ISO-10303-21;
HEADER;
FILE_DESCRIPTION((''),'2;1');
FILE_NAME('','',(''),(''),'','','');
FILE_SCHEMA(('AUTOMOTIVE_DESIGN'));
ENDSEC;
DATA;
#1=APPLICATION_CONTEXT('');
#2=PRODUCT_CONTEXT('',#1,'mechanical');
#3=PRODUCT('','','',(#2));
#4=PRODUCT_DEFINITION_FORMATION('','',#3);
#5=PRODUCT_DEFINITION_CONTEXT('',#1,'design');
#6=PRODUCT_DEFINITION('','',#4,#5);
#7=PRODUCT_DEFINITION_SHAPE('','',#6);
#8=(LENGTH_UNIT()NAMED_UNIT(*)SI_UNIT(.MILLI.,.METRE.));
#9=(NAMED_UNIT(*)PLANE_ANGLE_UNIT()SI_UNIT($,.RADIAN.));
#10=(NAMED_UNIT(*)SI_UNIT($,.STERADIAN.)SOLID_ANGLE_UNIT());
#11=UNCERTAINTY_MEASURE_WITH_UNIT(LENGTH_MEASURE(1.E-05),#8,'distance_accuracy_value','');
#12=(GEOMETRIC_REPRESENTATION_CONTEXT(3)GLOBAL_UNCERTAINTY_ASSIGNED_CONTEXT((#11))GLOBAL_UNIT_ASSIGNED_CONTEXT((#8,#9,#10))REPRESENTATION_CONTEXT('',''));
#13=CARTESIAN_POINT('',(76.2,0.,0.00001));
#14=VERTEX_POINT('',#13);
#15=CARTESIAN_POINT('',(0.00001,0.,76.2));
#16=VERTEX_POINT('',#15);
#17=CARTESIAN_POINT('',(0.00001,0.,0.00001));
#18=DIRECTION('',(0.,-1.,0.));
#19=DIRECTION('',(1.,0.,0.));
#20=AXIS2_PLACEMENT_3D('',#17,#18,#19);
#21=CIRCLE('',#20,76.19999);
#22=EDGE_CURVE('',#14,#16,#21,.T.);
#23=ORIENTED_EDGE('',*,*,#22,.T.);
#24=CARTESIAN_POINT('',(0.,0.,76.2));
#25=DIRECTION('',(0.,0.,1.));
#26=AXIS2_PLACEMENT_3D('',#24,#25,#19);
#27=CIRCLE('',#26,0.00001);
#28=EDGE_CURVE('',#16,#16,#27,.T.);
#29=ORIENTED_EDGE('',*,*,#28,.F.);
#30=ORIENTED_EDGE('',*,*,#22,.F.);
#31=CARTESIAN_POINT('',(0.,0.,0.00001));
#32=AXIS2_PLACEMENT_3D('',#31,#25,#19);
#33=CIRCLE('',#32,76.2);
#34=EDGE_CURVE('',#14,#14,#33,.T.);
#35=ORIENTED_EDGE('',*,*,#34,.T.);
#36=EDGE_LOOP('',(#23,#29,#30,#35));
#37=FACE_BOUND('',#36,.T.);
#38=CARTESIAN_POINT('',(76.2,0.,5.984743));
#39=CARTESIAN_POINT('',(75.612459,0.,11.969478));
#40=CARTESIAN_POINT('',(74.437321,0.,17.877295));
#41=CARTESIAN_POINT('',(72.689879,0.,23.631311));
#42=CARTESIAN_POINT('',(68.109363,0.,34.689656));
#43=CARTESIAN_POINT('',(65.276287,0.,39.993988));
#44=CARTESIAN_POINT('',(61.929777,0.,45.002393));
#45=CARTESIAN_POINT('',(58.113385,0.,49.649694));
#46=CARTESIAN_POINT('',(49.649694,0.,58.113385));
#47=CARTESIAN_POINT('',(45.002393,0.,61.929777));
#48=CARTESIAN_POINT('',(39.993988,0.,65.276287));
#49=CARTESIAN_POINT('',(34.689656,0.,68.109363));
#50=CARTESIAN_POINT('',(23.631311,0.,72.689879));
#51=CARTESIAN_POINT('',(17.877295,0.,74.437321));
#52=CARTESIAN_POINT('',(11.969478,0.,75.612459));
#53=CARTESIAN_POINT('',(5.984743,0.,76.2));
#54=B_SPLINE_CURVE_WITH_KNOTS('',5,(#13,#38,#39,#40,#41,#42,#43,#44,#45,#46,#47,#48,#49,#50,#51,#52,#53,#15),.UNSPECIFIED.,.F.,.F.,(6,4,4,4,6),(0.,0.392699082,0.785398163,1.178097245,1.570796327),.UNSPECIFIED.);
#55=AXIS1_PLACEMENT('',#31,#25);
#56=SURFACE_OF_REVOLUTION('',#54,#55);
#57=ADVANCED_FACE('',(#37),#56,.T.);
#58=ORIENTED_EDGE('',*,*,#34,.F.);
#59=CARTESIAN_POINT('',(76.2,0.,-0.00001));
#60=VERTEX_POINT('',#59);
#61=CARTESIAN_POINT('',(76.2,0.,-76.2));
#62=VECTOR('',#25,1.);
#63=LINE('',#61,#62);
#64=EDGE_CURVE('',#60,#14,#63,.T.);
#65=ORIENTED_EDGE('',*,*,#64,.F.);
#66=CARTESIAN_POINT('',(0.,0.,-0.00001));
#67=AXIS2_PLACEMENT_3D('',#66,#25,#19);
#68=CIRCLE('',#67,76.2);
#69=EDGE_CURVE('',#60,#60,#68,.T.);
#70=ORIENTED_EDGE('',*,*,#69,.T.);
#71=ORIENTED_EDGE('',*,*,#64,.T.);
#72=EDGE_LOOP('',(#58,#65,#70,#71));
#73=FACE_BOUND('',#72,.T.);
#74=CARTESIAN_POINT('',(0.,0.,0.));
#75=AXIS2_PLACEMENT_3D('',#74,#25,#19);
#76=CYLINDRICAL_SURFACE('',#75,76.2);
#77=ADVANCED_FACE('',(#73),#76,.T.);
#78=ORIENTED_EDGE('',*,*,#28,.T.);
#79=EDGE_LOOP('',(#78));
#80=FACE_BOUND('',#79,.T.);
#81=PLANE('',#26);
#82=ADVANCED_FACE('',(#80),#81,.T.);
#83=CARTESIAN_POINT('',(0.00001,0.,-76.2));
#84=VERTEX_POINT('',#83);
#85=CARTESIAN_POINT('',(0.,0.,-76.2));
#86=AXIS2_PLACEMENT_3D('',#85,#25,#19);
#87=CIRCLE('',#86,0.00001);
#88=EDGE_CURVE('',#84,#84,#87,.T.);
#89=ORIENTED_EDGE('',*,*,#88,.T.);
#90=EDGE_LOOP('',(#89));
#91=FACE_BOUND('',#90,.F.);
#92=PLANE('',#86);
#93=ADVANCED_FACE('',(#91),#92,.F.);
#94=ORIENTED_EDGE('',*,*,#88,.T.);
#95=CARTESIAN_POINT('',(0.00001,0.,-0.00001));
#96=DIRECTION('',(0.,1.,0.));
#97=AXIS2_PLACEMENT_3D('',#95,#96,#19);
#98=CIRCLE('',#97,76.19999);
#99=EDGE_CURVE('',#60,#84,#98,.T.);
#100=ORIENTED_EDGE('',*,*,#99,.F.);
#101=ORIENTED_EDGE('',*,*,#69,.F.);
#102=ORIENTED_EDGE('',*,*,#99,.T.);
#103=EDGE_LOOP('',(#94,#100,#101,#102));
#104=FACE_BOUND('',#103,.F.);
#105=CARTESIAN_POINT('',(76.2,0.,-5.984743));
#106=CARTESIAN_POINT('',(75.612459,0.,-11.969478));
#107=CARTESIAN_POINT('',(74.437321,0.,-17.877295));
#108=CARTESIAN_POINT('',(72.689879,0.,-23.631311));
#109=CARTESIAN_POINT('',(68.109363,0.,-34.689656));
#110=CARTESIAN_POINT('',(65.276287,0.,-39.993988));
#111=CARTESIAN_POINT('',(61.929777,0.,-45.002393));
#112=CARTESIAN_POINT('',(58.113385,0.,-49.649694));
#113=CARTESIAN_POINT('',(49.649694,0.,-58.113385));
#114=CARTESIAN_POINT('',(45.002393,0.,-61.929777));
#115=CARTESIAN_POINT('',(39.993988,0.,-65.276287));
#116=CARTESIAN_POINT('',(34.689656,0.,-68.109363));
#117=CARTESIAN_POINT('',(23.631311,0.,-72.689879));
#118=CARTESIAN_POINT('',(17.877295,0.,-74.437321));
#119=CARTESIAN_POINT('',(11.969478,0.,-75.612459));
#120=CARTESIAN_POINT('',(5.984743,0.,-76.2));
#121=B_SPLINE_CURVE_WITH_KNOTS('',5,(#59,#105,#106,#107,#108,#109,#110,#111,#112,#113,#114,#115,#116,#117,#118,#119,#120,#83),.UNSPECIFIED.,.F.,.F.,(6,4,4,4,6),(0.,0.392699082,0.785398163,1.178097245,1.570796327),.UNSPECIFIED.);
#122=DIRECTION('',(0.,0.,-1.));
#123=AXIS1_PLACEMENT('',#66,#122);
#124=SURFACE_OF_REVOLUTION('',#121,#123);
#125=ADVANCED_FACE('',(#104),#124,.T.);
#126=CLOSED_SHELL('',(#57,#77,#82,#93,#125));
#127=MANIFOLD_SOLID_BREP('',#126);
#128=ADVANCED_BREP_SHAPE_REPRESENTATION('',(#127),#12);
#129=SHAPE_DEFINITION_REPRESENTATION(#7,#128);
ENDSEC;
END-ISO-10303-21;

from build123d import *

# Parameters (mm, degrees)
F0_R     = 76.2
F1_DEPTH = 76.2
F2_DEPTH = 76.2
F3_R     = 76.19999


# Not quite as in the source:
# - a fillet or chamfer is up to 0.001 mm smaller than in the source, because OpenCascade refuses the exact size


with BuildPart() as f1:
    # F0 (on Top) → F1 (new body)
    with BuildSketch(Plane.XY):
        Circle(F0_R)
    extrude(amount=F1_DEPTH)

    # F2 (add): a face of the model
    f2_faces = [f1.faces().sort_by_distance(p)[0] for p in [
        (0, 0, 0),
    ]]
    extrude(f2_faces, amount=F2_DEPTH)

    # F3 (radius 76.2 in the source; OpenCascade refuses exactly that, so slightly less here)
    f3_edges = [f1.edges().sort_by_distance(p)[0] for p in [
        (-76.2, 0, -76.2),
        (-76.2, 0, 76.2),
    ]]
    fillet(f3_edges, radius=F3_R)


solid = f1.part
